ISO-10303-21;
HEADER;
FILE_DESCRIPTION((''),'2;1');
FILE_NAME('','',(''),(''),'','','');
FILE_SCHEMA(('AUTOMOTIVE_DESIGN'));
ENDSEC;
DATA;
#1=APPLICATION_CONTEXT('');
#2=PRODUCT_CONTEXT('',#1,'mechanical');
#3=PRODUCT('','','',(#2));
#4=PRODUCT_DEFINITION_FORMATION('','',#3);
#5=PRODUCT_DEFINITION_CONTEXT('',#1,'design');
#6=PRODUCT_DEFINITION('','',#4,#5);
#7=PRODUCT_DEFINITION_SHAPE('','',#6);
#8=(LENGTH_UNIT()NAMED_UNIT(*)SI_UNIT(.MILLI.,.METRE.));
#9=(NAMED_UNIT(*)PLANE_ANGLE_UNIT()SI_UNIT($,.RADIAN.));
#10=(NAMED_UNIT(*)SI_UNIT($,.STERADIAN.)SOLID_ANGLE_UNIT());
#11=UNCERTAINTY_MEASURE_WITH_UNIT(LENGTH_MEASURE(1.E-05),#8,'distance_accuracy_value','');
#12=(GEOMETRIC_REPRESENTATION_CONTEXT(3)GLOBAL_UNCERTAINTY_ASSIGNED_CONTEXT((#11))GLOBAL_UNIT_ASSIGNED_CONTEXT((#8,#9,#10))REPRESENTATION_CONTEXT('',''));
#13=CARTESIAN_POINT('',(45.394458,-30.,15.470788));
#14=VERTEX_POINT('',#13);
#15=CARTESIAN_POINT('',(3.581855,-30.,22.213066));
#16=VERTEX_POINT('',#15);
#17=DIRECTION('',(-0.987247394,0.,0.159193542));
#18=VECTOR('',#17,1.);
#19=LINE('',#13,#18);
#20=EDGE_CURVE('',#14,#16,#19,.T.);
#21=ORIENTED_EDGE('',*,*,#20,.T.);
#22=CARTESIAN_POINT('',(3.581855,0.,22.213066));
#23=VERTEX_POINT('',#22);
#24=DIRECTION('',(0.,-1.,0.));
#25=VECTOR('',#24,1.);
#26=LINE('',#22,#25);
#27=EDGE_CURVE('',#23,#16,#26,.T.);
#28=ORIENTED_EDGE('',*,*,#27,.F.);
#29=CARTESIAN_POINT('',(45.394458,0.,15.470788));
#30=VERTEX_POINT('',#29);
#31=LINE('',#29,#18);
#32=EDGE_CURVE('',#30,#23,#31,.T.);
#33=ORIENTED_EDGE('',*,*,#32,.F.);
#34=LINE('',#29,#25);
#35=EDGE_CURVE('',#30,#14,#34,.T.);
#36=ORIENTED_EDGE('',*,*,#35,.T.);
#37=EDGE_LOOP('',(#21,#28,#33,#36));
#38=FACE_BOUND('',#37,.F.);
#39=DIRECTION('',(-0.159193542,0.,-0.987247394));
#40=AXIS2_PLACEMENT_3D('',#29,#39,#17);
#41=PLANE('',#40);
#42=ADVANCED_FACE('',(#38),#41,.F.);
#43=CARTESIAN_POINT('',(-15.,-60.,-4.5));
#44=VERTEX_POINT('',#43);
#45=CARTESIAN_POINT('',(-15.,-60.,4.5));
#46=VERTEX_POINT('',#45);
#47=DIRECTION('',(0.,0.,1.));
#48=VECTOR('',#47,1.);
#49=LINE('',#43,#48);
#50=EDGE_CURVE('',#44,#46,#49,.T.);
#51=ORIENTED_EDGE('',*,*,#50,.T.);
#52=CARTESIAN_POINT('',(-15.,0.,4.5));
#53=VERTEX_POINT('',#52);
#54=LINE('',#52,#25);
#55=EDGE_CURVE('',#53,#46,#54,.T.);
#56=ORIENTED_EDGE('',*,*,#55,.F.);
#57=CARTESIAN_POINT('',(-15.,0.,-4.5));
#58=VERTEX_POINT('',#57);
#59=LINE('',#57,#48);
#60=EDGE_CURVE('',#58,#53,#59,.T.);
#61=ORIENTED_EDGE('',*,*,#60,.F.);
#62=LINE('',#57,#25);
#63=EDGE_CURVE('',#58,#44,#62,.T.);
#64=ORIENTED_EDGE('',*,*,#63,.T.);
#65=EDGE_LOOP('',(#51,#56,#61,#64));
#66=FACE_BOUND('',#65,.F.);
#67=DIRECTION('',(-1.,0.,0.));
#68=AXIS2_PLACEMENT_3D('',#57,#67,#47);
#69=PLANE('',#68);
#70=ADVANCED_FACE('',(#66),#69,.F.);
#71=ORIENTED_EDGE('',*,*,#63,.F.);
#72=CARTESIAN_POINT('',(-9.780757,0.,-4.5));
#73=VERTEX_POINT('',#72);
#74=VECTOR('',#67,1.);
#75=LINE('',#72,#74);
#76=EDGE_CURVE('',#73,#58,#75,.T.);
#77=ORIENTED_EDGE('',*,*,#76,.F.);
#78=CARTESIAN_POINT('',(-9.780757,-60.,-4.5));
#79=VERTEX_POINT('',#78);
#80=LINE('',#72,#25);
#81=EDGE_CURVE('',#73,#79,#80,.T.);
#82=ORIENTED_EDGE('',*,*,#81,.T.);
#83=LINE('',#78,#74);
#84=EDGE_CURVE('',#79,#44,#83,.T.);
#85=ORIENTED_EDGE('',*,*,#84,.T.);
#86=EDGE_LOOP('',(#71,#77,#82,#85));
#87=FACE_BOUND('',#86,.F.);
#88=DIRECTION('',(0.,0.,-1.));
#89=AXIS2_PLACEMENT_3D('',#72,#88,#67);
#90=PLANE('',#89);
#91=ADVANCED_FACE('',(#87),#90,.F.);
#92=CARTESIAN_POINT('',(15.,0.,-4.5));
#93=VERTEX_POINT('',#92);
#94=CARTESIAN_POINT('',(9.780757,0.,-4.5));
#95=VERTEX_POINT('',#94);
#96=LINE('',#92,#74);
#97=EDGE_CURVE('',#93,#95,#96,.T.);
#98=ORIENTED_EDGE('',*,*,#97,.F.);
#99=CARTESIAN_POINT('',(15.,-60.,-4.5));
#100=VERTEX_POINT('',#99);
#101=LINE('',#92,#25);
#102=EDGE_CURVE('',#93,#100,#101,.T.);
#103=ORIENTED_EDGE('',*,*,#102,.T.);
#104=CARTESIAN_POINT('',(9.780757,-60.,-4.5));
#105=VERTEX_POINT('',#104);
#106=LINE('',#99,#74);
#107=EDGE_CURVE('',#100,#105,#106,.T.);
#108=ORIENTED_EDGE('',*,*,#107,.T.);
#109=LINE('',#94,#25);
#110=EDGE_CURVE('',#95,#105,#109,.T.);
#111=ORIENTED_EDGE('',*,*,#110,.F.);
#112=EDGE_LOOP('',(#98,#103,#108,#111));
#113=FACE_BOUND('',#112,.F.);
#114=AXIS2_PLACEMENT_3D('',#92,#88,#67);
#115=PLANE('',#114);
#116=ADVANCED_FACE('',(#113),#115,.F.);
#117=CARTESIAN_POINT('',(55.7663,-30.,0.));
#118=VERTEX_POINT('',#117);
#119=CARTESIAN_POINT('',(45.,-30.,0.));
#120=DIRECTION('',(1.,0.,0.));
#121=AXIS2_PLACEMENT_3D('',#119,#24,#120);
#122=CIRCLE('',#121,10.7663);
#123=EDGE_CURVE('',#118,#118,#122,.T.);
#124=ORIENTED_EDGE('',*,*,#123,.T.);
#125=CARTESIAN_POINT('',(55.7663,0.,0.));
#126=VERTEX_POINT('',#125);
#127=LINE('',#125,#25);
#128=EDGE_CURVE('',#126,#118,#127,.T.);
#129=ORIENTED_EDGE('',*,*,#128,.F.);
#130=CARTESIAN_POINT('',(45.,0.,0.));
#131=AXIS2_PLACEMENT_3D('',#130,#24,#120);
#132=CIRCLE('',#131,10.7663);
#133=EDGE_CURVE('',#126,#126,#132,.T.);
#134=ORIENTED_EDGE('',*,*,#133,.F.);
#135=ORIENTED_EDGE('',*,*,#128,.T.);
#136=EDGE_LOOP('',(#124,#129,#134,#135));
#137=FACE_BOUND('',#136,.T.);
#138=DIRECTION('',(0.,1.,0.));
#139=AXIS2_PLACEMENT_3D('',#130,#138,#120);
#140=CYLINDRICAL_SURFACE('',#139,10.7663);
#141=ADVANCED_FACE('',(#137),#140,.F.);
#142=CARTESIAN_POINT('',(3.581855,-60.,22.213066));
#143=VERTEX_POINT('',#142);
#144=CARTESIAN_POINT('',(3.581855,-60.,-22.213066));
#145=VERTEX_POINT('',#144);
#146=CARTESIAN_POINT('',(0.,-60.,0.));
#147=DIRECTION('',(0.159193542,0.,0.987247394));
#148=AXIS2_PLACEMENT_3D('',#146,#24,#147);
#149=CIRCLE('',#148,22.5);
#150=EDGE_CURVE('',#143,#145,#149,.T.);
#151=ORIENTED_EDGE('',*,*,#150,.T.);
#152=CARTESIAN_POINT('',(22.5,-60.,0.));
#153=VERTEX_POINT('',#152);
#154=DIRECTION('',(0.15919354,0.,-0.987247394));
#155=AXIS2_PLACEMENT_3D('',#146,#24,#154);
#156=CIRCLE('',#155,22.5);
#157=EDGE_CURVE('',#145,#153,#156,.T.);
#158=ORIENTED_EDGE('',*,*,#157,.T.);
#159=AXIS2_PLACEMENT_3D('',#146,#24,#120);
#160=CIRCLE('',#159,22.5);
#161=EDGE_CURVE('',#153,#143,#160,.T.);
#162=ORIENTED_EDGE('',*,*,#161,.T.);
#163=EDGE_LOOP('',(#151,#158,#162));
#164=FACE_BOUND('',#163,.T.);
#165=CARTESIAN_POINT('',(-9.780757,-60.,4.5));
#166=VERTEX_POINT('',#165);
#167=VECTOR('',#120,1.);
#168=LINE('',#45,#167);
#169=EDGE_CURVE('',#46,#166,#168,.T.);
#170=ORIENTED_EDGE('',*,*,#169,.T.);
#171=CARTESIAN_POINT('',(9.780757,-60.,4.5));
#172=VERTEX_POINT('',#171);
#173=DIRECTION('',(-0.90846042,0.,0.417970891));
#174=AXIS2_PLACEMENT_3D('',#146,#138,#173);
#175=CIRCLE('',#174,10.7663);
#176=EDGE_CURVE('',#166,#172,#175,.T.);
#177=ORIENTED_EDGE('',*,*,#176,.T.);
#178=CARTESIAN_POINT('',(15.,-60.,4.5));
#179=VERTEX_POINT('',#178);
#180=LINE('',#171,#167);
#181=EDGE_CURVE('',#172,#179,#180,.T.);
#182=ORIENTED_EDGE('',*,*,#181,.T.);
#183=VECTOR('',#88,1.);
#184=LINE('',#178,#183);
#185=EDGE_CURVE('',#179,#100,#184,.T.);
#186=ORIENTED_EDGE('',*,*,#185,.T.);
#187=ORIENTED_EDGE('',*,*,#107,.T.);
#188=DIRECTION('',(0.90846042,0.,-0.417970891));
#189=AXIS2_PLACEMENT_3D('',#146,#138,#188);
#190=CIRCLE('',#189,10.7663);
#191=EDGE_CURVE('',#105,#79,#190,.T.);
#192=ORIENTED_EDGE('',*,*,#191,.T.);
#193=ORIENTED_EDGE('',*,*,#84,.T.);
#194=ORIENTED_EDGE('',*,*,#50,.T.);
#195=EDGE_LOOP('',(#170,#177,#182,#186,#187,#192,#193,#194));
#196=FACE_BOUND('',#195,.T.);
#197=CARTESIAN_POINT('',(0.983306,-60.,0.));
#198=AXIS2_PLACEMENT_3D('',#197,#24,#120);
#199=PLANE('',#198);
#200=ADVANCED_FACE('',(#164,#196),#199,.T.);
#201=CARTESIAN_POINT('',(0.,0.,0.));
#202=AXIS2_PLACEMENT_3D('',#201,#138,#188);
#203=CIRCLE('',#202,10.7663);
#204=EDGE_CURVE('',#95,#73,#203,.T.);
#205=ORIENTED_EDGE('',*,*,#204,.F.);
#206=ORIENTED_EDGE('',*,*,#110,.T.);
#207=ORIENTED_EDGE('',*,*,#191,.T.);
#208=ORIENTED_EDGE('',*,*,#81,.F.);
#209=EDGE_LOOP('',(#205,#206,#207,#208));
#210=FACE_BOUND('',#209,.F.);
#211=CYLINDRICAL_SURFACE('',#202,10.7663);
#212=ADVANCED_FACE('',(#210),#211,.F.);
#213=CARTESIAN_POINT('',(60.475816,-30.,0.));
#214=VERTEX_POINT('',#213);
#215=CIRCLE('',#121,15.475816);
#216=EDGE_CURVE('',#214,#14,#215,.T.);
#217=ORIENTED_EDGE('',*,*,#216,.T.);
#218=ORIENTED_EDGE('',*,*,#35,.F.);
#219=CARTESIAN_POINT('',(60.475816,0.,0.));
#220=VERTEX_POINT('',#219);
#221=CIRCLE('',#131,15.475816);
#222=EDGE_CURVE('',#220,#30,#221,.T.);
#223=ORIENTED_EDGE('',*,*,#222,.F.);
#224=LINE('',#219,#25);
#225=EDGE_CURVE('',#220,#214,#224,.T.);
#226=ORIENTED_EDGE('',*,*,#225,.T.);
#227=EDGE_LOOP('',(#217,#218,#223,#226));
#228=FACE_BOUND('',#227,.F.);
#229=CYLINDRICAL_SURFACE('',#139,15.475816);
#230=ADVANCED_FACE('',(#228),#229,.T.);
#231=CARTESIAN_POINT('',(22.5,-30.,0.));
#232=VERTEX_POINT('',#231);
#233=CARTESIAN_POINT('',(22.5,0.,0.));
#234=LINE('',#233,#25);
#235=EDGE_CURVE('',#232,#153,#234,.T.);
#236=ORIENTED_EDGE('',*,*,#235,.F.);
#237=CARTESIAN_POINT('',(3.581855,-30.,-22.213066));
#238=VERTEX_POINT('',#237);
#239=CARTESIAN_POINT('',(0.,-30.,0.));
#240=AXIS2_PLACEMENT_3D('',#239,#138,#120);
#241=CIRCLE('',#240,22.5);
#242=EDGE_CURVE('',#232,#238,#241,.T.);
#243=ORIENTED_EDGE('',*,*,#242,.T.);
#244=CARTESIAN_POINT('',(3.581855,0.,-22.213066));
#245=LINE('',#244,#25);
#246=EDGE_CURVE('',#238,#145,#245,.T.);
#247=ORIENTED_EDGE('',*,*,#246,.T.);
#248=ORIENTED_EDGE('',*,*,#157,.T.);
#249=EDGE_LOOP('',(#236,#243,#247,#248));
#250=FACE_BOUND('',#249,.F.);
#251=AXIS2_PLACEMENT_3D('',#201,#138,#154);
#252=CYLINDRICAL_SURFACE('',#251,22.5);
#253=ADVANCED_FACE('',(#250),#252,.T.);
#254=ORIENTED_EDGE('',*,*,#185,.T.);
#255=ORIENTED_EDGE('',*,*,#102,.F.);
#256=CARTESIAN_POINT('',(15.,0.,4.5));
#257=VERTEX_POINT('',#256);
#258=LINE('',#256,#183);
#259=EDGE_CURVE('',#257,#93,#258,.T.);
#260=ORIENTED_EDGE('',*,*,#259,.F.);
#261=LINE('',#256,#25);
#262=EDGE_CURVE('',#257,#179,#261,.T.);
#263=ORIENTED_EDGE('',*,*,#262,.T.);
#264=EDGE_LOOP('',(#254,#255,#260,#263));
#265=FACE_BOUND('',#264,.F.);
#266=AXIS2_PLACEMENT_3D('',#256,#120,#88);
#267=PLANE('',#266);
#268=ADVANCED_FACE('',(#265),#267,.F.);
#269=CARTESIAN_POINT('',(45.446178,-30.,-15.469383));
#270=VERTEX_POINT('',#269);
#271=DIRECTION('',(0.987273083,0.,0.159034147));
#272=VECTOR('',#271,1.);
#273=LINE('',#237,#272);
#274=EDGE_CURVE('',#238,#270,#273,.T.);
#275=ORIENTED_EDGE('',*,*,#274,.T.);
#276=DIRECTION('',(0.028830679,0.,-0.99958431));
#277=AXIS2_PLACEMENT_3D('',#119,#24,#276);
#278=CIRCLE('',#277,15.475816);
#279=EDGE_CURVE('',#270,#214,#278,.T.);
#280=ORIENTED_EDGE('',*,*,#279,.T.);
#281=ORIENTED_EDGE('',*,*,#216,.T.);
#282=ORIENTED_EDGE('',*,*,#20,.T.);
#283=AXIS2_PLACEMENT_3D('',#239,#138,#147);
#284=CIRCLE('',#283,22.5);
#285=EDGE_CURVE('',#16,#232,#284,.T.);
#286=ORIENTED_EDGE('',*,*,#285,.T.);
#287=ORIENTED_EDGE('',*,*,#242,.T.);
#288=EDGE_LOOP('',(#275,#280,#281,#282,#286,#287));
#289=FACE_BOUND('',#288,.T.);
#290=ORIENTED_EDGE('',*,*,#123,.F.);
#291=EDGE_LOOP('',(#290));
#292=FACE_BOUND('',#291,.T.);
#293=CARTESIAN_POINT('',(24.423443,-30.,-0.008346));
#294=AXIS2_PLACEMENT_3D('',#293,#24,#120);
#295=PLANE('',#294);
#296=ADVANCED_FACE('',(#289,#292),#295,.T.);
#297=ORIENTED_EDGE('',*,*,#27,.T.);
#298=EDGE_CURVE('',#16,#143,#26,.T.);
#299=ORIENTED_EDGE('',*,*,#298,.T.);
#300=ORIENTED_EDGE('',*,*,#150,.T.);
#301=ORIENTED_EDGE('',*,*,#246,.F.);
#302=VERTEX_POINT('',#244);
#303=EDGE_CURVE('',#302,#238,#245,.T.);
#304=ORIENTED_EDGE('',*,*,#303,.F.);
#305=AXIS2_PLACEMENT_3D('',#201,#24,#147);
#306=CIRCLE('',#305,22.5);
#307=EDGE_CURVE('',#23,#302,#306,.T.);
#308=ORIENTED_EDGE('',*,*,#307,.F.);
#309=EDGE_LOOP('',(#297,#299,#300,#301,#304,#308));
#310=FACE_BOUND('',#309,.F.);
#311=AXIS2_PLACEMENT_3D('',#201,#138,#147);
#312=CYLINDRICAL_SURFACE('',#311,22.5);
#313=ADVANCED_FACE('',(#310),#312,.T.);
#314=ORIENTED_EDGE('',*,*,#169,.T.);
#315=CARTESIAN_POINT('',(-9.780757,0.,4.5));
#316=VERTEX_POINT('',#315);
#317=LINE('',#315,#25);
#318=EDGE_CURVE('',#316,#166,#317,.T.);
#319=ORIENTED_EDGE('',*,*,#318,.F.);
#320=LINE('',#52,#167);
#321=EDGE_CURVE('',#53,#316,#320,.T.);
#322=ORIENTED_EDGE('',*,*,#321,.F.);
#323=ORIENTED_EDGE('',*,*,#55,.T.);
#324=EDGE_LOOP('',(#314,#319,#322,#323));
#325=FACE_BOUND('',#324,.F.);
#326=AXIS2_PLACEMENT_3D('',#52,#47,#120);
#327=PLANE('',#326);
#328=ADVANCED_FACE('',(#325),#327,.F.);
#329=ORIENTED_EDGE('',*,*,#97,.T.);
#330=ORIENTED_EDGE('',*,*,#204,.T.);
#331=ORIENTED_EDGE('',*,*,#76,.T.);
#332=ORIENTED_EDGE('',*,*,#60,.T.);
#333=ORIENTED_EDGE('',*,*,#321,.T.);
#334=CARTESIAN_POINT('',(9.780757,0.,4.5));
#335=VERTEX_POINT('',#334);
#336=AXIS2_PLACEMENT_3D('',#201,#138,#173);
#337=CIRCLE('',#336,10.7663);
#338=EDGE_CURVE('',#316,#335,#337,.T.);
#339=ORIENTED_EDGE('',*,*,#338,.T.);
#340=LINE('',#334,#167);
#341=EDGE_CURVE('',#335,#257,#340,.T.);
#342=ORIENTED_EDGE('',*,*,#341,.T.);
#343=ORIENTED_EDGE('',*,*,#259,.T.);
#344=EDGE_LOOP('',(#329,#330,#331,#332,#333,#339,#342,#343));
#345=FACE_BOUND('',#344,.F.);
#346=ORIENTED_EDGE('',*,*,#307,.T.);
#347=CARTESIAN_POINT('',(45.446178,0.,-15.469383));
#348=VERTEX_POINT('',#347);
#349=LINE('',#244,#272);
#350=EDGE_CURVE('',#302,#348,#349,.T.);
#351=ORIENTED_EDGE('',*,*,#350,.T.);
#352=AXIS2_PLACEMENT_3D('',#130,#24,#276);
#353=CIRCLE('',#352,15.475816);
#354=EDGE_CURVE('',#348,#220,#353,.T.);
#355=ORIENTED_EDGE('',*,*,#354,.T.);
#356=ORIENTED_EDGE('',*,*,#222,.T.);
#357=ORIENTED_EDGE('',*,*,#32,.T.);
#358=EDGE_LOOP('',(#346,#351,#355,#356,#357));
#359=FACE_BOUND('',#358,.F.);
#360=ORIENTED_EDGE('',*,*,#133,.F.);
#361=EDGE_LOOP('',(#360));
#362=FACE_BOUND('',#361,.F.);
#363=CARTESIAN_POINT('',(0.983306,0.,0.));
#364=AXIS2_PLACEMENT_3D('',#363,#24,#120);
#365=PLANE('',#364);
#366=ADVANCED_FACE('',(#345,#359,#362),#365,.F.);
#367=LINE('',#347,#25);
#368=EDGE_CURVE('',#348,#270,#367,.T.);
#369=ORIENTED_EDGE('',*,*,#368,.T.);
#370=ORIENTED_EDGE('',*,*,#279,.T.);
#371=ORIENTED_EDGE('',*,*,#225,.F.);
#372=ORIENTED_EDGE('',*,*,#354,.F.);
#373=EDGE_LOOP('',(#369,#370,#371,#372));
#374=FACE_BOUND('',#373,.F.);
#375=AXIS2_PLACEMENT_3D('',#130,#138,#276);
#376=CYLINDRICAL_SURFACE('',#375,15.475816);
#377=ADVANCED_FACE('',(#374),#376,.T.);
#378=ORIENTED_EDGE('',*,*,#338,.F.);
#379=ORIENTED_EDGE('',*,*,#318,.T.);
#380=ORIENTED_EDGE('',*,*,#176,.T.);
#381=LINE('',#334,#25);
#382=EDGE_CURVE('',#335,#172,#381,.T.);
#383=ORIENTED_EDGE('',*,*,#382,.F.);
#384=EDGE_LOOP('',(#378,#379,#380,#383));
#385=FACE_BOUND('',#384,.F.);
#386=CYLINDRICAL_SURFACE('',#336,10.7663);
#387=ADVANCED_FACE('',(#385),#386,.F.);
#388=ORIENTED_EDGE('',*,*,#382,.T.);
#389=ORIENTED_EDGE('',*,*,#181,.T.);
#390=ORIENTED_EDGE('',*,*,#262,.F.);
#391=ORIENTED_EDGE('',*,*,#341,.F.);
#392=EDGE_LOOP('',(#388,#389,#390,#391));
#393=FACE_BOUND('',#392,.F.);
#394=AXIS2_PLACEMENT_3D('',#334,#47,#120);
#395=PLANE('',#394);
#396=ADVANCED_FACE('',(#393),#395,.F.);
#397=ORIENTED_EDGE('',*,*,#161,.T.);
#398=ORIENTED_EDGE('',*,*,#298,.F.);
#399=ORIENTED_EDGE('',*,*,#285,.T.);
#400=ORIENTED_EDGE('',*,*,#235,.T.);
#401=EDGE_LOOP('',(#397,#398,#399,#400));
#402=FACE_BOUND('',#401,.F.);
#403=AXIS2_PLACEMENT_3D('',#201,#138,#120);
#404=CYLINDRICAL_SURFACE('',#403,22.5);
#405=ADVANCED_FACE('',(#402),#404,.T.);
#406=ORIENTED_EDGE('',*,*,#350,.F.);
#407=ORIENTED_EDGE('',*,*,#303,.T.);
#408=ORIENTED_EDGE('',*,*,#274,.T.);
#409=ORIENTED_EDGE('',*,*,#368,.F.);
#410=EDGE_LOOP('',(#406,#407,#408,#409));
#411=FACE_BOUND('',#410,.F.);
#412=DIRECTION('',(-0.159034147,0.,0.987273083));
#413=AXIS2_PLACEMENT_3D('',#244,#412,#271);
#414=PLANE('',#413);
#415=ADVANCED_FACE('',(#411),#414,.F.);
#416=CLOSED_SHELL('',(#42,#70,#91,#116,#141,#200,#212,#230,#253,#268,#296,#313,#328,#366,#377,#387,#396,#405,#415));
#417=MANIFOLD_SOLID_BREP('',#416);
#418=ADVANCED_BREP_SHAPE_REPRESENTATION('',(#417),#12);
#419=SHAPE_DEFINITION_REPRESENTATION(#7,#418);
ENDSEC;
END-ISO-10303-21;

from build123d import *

# Parameters (mm, degrees)
F0_R     = 10.7663
F1_DEPTH = 30
F2_DEPTH = 60


# Not quite as in the source:
# - ends of sketch curves that miss each other by under 0.0002 mm in the source are joined


with BuildPart() as f1:
    # F0 (on Front) → F1 (new body)
    with BuildSketch(Plane.XZ):
        with BuildLine():
            ThreePointArc((3.5818546953, 22.2130663561), (17.1295319645, 14.5886645954), (22.5, 0))
            ThreePointArc((22.5, 0), (17.1295319492, -14.5886646134), (3.5818546487, -22.2130663636))
            Line((3.5818546487, -22.2130663636), (45.4461782926, -15.469383066))
            ThreePointArc((45.4461782926, -15.469383066), (29.5242054073, -0.0258695995), (45.3944581798, 15.4707882881))
            Line((45.3944581798, 15.4707882881), (3.5818546953, 22.2130663561))
        make_face()
        with BuildLine():
            ThreePointArc((60.4758162147, 0), (56.0816390892, 10.8026923778), (45.3944581798, 15.4707882881))
            ThreePointArc((45.3944581798, 15.4707882881), (29.5242054073, -0.0258695995), (45.4461782926, -15.469383066))
            ThreePointArc((45.4461782926, -15.469383066), (56.0996815443, -10.7841530557), (60.4758162147, 0))
        make_face()
        with Locations((45, 0)):
            Circle(F0_R, mode=Mode.SUBTRACT)
    extrude(amount=F1_DEPTH)

    # F0 (on Front) → F2 (join)
    with BuildSketch(Plane.XZ):
        with BuildLine():
            ThreePointArc((3.5818546487, -22.2130663636), (17.1295319492, -14.5886646134), (22.5, 0))
            ThreePointArc((22.5, 0), (17.1295319645, 14.5886645954), (3.5818546953, 22.2130663561))
            ThreePointArc((3.5818546953, 22.2130663561), (-22.5, 2.36e-08), (3.5818546487, -22.2130663636))
        make_face()
        with BuildLine():
            ThreePointArc((-9.780757419, 4.5), (0, 10.7663), (9.780757419, 4.5))
            Line((9.780757419, 4.5), (15, 4.5))
            Line((15, 4.5), (15, -4.5))
            Line((15, -4.5), (9.780757419, -4.5))
            ThreePointArc((9.780757419, -4.5), (0, -10.7663), (-9.780757419, -4.5))
            Line((-9.780757419, -4.5), (-15, -4.5))
            Line((-15, -4.5), (-15, 4.5))
            Line((-15, 4.5), (-9.780757419, 4.5))
        make_face(mode=Mode.SUBTRACT)
    extrude(amount=F2_DEPTH)


solid = f1.part
